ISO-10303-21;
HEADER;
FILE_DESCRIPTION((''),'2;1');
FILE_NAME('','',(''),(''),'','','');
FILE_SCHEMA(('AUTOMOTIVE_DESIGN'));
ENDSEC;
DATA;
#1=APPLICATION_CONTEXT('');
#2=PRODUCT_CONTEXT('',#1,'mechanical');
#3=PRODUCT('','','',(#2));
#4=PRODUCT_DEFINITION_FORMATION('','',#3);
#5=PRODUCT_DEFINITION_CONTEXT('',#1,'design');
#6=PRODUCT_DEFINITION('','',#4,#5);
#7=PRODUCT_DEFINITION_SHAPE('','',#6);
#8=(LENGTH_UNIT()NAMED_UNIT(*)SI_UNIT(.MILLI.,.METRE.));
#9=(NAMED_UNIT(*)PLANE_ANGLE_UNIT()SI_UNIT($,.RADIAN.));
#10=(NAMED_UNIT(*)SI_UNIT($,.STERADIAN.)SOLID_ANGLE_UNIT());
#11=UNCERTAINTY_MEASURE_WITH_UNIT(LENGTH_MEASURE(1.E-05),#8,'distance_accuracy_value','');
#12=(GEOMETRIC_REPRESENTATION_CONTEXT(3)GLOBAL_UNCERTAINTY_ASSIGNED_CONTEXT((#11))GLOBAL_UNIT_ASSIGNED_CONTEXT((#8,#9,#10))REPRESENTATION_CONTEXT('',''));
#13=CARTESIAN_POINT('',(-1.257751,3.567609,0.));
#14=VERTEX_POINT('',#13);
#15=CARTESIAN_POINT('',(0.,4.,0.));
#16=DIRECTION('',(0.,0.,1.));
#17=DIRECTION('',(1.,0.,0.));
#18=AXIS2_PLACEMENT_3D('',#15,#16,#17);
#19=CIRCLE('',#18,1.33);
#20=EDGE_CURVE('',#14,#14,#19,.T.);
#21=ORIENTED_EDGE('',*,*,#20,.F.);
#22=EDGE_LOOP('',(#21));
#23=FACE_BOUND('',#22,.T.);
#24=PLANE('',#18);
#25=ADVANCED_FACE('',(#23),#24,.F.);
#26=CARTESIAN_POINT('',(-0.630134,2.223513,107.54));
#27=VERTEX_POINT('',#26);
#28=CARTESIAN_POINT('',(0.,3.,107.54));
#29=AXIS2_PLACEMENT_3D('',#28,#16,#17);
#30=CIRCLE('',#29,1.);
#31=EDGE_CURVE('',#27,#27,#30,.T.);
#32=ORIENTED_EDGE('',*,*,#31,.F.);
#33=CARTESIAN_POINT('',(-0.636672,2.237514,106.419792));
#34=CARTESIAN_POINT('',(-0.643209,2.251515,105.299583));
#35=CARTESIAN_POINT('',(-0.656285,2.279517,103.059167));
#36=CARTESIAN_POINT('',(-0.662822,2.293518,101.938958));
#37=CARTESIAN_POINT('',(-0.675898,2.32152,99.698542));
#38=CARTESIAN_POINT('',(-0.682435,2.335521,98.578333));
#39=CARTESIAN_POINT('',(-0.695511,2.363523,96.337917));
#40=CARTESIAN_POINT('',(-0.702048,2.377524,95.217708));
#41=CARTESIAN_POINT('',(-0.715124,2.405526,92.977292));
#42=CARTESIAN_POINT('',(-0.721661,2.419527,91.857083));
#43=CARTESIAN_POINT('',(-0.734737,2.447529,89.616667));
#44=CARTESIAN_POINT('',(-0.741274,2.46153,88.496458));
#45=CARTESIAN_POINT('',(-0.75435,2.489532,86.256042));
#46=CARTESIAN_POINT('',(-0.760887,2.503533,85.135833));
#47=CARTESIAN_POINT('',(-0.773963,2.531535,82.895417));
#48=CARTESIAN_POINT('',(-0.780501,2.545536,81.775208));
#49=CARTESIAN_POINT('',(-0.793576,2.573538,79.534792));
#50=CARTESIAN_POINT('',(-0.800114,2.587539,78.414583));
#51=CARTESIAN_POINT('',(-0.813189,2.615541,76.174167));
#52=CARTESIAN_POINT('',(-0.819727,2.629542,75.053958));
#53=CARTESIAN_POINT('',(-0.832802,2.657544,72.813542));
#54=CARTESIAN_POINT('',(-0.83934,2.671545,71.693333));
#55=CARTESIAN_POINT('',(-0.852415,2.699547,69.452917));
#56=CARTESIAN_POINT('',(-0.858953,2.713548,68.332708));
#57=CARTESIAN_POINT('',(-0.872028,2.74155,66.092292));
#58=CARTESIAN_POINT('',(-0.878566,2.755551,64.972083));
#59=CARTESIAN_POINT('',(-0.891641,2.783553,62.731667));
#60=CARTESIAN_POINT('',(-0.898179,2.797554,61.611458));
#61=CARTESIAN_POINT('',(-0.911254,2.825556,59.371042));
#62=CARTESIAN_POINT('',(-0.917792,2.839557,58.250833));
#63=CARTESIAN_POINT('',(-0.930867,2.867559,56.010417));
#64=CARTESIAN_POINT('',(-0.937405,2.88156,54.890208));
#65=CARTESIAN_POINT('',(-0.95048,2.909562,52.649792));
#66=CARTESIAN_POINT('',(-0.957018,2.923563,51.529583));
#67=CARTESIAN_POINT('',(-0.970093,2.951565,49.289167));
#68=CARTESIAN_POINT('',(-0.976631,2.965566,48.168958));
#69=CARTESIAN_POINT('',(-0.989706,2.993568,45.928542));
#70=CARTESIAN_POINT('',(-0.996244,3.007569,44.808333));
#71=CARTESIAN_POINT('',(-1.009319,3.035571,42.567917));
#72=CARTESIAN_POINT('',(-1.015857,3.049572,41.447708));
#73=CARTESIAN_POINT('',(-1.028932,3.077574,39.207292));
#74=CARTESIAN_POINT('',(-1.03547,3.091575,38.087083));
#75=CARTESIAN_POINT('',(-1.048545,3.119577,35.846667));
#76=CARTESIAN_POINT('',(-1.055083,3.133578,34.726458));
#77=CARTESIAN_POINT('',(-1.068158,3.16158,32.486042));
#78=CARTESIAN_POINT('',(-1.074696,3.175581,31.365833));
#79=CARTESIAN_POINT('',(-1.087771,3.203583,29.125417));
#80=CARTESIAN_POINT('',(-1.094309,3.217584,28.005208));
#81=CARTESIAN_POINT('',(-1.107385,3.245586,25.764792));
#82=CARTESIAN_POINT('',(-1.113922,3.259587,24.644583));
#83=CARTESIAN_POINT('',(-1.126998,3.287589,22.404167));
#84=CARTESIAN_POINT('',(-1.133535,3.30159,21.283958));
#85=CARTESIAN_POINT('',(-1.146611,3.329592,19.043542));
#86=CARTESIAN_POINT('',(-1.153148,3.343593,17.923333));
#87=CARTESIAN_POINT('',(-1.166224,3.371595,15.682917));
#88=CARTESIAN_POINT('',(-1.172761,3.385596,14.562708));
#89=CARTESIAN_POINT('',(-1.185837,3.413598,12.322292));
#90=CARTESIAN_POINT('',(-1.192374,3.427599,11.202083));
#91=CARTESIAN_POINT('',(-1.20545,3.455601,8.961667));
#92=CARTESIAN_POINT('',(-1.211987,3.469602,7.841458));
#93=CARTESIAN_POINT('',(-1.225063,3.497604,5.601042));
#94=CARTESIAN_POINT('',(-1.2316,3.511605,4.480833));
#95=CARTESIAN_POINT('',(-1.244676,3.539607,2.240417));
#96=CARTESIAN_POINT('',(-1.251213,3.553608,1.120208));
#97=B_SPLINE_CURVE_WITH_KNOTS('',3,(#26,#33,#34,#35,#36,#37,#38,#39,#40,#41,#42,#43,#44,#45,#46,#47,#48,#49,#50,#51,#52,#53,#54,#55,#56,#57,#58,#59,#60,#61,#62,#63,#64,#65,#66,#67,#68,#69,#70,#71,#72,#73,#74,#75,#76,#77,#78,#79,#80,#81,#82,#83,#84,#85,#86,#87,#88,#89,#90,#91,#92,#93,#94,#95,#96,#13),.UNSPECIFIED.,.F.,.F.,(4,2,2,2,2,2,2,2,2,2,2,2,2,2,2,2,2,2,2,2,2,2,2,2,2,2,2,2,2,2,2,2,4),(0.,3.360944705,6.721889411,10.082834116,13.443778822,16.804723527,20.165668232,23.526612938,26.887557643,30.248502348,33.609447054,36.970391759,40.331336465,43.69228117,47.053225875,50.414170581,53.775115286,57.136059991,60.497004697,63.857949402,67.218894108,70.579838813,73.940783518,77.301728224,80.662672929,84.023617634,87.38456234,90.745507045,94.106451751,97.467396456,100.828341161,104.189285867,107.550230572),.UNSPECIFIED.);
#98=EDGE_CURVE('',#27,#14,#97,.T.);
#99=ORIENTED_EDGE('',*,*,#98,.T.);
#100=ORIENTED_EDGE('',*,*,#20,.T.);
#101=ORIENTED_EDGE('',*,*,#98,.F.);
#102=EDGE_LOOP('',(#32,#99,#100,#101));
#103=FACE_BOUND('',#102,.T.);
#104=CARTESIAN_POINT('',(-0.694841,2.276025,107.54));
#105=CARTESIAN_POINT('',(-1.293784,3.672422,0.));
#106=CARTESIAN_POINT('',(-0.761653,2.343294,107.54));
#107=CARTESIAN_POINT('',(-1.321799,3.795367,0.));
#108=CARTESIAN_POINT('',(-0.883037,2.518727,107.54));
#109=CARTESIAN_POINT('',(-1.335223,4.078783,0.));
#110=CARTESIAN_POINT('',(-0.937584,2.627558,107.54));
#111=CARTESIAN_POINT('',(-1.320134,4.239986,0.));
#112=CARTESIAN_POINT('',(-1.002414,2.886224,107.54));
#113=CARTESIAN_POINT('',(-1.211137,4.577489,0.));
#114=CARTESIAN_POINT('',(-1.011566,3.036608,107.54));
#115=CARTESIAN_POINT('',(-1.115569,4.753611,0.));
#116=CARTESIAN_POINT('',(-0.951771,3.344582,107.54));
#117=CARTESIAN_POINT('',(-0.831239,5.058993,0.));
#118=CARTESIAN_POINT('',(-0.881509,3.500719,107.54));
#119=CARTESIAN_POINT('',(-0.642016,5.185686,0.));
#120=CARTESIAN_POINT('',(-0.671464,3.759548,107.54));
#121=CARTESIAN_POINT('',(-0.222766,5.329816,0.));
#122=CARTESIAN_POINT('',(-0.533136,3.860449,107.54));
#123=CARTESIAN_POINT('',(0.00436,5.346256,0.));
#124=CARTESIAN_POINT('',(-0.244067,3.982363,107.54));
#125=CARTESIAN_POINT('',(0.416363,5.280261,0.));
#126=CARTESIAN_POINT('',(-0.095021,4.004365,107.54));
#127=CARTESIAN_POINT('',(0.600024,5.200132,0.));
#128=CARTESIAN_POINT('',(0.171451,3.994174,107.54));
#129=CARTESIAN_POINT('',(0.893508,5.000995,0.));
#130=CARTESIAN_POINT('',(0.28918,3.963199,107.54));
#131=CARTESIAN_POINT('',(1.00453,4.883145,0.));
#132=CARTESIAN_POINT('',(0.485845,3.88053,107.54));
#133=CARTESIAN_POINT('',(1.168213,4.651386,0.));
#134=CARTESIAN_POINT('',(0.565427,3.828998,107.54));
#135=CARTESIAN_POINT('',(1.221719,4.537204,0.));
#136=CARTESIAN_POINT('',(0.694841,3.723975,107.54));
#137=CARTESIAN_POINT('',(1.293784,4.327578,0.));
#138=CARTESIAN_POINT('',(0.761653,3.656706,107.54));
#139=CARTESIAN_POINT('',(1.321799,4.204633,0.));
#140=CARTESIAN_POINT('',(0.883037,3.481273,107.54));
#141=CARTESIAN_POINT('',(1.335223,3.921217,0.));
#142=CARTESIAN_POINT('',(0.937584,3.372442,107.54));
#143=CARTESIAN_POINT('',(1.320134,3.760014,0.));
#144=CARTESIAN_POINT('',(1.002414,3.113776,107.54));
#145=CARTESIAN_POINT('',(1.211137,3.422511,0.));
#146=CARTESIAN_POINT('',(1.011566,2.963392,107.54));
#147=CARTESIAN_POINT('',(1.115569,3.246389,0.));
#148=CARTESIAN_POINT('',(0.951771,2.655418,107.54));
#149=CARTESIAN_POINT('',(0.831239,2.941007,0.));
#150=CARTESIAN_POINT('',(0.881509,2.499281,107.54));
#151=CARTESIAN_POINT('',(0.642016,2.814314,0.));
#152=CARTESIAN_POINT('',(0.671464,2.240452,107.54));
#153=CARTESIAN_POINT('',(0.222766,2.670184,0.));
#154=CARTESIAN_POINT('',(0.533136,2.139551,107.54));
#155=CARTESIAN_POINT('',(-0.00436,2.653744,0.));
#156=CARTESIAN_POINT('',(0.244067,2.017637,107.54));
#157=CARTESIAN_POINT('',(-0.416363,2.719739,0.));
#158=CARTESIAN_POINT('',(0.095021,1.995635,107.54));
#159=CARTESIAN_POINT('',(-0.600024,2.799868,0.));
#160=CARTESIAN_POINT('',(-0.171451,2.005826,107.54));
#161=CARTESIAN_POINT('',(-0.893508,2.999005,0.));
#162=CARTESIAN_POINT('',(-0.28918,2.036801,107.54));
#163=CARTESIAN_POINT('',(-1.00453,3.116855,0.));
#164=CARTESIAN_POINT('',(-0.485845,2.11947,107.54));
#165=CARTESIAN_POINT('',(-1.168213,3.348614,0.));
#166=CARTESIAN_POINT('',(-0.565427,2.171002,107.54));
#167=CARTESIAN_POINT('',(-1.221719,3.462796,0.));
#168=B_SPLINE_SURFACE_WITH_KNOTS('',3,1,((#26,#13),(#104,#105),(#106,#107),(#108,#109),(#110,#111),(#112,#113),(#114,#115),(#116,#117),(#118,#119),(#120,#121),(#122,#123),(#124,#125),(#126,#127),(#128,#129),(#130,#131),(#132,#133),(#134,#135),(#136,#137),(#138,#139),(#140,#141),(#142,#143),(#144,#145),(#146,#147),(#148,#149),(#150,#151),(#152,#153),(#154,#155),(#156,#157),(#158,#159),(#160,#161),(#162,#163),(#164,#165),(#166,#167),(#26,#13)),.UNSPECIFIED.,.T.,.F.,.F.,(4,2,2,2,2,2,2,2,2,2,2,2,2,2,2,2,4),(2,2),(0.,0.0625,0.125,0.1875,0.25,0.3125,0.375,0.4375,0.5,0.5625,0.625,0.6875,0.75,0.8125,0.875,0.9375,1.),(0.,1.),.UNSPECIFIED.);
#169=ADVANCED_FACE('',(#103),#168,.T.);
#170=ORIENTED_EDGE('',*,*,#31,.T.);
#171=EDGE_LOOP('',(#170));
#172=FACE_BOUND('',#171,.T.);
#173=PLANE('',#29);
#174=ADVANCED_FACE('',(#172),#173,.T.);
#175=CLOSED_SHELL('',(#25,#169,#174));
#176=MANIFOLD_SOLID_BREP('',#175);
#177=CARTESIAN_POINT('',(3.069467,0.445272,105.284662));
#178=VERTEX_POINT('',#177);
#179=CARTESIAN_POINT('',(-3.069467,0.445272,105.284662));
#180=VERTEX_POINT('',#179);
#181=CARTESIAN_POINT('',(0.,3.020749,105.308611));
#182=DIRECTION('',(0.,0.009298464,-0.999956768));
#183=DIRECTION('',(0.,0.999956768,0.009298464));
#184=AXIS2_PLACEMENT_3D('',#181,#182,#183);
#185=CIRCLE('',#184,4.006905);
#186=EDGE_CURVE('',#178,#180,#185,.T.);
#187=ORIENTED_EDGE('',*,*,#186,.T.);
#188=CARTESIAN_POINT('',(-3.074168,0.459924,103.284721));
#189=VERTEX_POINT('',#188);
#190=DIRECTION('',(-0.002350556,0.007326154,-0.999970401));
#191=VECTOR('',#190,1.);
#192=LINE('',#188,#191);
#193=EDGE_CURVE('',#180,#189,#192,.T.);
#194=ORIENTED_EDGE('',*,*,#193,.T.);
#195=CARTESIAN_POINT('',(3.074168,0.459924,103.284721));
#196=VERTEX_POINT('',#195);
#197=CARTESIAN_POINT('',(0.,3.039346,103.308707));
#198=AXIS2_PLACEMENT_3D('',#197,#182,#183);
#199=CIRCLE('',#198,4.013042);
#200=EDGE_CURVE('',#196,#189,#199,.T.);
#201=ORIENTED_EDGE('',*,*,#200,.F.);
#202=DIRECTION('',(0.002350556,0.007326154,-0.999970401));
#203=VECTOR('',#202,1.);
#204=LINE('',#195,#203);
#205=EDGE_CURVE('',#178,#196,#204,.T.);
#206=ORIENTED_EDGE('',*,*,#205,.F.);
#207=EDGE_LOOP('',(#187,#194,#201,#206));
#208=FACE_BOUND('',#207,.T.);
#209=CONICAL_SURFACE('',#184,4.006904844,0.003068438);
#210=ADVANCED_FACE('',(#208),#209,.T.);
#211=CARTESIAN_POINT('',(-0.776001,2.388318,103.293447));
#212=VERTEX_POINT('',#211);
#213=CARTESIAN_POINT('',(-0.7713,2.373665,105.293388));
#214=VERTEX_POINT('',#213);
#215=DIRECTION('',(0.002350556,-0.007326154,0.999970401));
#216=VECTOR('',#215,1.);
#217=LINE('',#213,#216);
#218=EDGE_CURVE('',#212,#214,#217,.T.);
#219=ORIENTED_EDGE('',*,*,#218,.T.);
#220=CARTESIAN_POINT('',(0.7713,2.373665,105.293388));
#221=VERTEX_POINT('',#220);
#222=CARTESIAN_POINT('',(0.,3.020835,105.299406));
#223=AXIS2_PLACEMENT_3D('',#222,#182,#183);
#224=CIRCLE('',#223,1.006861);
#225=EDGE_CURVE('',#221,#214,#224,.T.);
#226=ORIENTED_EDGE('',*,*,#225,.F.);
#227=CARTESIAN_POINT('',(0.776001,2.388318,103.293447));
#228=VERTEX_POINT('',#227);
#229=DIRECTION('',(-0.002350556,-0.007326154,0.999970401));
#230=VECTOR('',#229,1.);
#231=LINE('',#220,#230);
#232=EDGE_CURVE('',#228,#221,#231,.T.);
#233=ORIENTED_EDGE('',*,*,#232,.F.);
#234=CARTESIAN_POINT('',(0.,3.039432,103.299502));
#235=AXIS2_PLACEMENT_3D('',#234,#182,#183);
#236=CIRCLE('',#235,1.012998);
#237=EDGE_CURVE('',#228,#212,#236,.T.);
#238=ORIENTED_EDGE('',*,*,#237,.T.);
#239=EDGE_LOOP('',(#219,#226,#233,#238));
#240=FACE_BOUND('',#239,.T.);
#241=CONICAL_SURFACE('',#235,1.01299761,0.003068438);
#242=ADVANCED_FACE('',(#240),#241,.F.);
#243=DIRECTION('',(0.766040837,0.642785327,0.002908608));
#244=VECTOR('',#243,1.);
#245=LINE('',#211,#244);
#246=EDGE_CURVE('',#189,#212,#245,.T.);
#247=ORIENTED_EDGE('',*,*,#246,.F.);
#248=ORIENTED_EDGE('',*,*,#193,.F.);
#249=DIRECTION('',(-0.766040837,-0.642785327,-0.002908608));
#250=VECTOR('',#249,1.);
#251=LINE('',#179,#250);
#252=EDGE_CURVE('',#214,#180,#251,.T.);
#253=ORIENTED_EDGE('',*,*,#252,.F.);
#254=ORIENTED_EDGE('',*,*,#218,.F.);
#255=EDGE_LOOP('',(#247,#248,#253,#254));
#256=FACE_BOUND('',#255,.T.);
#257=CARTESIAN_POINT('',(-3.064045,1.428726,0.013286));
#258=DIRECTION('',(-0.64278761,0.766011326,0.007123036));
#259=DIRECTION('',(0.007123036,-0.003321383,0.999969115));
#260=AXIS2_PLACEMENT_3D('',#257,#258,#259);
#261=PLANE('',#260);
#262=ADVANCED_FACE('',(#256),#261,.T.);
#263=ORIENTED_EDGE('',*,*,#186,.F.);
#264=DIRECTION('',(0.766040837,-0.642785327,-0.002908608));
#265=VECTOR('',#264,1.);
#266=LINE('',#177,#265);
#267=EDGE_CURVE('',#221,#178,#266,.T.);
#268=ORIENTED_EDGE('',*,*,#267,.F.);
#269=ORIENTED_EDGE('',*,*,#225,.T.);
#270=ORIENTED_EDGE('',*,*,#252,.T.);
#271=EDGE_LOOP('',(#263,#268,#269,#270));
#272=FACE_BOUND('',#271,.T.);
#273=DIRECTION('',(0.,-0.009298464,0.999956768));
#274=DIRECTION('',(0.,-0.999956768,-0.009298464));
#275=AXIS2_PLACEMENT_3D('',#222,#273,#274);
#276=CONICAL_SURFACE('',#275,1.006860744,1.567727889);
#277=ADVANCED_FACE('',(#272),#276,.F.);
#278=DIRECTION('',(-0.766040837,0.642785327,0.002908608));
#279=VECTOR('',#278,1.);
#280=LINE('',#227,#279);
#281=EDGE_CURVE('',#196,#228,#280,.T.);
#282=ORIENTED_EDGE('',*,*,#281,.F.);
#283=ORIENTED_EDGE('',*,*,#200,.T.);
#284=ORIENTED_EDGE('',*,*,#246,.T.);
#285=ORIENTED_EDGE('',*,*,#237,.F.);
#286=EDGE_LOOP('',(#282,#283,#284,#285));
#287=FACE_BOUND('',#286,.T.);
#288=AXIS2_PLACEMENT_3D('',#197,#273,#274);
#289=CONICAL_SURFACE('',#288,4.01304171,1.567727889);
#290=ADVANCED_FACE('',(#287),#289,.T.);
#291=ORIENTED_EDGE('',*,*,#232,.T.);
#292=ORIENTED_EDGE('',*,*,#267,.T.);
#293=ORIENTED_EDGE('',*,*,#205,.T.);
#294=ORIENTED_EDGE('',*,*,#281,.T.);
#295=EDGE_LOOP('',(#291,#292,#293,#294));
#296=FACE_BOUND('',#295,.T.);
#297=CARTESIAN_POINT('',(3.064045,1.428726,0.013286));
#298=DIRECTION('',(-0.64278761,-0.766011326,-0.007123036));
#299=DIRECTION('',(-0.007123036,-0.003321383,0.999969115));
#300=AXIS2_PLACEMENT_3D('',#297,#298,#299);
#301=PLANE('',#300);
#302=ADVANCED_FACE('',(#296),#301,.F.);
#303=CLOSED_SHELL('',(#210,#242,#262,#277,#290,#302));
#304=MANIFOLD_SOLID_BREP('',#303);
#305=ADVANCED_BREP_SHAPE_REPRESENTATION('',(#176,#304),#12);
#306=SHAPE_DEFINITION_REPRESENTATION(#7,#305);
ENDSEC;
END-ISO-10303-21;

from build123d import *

# Parameters (mm, degrees)
REVOLVE_1_ANGLE = 100


with BuildPart() as part:
    # 放样1: read off the stored shape, not the designer's step
    # 放样1: loft between two sections, ruled curve by curve
    loft_1_from = [
        Edge.make_bspline([(-0.630133871, 2.223513487, 107.54), (-0.694841081, 2.276024643, 107.54), (-0.761652519, 2.343293659, 107.54), (-0.883036961, 2.518727204, 107.54), (-0.937584486, 2.627557912, 107.54), (-1.002413523, 2.886224313, 107.54), (-1.011566009, 3.036607803, 107.54), (-0.951771481, 3.344582311, 107.54), (-0.881508825, 3.500719452, 107.54), (-0.671464201, 3.75954829, 107.54), (-0.533135829, 3.860448783, 107.54), (-0.244067314, 3.982363002, 107.54), (-0.095020748, 4.004364891, 107.54), (0.171451127, 3.994174174, 107.54), (0.289180076, 3.963199181, 107.54), (0.48584451, 3.880529892, 107.54), (0.565426662, 3.828997669, 107.54), (0.694841081, 3.723975357, 107.54), (0.761652519, 3.656706341, 107.54), (0.883036961, 3.481272796, 107.54), (0.937584486, 3.372442088, 107.54), (1.002413523, 3.113775687, 107.54), (1.011566009, 2.963392197, 107.54), (0.951771481, 2.655417689, 107.54), (0.881508825, 2.499280548, 107.54), (0.671464201, 2.24045171, 107.54), (0.533135829, 2.139551217, 107.54), (0.244067314, 2.017636998, 107.54), (0.095020748, 1.995635109, 107.54), (-0.171451127, 2.005825826, 107.54), (-0.289180076, 2.036800819, 107.54), (-0.48584451, 2.119470108, 107.54), (-0.565426662, 2.171002331, 107.54), (-0.630133871, 2.223513487, 107.54)], [0, 0, 0, 0, 0.0625, 0.0625, 0.125, 0.125, 0.1875, 0.1875, 0.25, 0.25, 0.3125, 0.3125, 0.375, 0.375, 0.4375, 0.4375, 0.5, 0.5, 0.5625, 0.5625, 0.625, 0.625, 0.6875, 0.6875, 0.75, 0.75, 0.8125, 0.8125, 0.875, 0.875, 0.9375, 0.9375, 1, 1, 1, 1], 3),
    ]
    loft_1_to = [
        Edge.make_bspline([(-1.257751162, 3.567608956, 0), (-1.293783749, 3.672421553, 0), (-1.321798599, 3.795367125, 0), (-1.335222616, 4.078782721, 0), (-1.320133937, 4.239986455, 0), (-1.211137174, 4.577489269, 0), (-1.115569475, 4.753611411, 0), (-0.831239343, 5.058993186, 0), (-0.642016238, 5.185685988, 0), (-0.22276585, 5.329816336, 0), (0.004360045, 5.34625644, 0), (0.416362735, 5.28026071, 0), (0.600024499, 5.200132373, 0), (0.893508107, 5.000994692, 0), (1.004529945, 4.883145367, 0), (1.168213301, 4.651386088, 0), (1.221718575, 4.537203641, 0), (1.293783749, 4.327578447, 0), (1.321798599, 4.204632875, 0), (1.335222616, 3.921217279, 0), (1.320133937, 3.760013545, 0), (1.211137174, 3.422510731, 0), (1.115569475, 3.246388589, 0), (0.831239343, 2.941006814, 0), (0.642016238, 2.814314012, 0), (0.22276585, 2.670183664, 0), (-0.004360045, 2.65374356, 0), (-0.416362735, 2.71973929, 0), (-0.600024499, 2.799867627, 0), (-0.893508107, 2.999005308, 0), (-1.004529945, 3.116854633, 0), (-1.168213301, 3.348613912, 0), (-1.221718575, 3.462796359, 0), (-1.257751162, 3.567608956, 0)], [0, 0, 0, 0, 0.0625, 0.0625, 0.125, 0.125, 0.1875, 0.1875, 0.25, 0.25, 0.3125, 0.3125, 0.375, 0.375, 0.4375, 0.4375, 0.5, 0.5, 0.5625, 0.5625, 0.625, 0.625, 0.6875, 0.6875, 0.75, 0.75, 0.8125, 0.8125, 0.875, 0.875, 0.9375, 0.9375, 1, 1, 1, 1], 3),
    ]
    loft_1 = Solid(Shell([*[Face.make_surface_from_curves(loft_1_from[k], loft_1_to[k]) for k in range(1)], Face(Wire(loft_1_from)), Face(Wire(loft_1_to))]))
    add(loft_1)


with BuildPart() as body_2:
    # 草图7 → 旋转1 (revolve, symmetric)
    with BuildSketch(Plane(origin=(0, 0, 0), x_dir=(0, 0, -1), z_dir=(1, 0, 0))) as revolve_1_sk:
        Polygon((-105.290043667, 2.014017768), (-103.290082481, 2.026478006), (-103.271391762, -0.973521994), (-105.271352947, -0.985982232), align=None)
    revolve(axis=Axis((0, 4, 0), (0, -0.009298463533136264, 0.9999567683534739)), revolution_arc=REVOLVE_1_ANGLE / 2)
    revolve(revolve_1_sk.sketch, axis=Axis((0, 4, 0), (0, 0.009298463533136264, -0.9999567683534739)), revolution_arc=REVOLVE_1_ANGLE / 2)


solid = Compound([part.part, body_2.part])
